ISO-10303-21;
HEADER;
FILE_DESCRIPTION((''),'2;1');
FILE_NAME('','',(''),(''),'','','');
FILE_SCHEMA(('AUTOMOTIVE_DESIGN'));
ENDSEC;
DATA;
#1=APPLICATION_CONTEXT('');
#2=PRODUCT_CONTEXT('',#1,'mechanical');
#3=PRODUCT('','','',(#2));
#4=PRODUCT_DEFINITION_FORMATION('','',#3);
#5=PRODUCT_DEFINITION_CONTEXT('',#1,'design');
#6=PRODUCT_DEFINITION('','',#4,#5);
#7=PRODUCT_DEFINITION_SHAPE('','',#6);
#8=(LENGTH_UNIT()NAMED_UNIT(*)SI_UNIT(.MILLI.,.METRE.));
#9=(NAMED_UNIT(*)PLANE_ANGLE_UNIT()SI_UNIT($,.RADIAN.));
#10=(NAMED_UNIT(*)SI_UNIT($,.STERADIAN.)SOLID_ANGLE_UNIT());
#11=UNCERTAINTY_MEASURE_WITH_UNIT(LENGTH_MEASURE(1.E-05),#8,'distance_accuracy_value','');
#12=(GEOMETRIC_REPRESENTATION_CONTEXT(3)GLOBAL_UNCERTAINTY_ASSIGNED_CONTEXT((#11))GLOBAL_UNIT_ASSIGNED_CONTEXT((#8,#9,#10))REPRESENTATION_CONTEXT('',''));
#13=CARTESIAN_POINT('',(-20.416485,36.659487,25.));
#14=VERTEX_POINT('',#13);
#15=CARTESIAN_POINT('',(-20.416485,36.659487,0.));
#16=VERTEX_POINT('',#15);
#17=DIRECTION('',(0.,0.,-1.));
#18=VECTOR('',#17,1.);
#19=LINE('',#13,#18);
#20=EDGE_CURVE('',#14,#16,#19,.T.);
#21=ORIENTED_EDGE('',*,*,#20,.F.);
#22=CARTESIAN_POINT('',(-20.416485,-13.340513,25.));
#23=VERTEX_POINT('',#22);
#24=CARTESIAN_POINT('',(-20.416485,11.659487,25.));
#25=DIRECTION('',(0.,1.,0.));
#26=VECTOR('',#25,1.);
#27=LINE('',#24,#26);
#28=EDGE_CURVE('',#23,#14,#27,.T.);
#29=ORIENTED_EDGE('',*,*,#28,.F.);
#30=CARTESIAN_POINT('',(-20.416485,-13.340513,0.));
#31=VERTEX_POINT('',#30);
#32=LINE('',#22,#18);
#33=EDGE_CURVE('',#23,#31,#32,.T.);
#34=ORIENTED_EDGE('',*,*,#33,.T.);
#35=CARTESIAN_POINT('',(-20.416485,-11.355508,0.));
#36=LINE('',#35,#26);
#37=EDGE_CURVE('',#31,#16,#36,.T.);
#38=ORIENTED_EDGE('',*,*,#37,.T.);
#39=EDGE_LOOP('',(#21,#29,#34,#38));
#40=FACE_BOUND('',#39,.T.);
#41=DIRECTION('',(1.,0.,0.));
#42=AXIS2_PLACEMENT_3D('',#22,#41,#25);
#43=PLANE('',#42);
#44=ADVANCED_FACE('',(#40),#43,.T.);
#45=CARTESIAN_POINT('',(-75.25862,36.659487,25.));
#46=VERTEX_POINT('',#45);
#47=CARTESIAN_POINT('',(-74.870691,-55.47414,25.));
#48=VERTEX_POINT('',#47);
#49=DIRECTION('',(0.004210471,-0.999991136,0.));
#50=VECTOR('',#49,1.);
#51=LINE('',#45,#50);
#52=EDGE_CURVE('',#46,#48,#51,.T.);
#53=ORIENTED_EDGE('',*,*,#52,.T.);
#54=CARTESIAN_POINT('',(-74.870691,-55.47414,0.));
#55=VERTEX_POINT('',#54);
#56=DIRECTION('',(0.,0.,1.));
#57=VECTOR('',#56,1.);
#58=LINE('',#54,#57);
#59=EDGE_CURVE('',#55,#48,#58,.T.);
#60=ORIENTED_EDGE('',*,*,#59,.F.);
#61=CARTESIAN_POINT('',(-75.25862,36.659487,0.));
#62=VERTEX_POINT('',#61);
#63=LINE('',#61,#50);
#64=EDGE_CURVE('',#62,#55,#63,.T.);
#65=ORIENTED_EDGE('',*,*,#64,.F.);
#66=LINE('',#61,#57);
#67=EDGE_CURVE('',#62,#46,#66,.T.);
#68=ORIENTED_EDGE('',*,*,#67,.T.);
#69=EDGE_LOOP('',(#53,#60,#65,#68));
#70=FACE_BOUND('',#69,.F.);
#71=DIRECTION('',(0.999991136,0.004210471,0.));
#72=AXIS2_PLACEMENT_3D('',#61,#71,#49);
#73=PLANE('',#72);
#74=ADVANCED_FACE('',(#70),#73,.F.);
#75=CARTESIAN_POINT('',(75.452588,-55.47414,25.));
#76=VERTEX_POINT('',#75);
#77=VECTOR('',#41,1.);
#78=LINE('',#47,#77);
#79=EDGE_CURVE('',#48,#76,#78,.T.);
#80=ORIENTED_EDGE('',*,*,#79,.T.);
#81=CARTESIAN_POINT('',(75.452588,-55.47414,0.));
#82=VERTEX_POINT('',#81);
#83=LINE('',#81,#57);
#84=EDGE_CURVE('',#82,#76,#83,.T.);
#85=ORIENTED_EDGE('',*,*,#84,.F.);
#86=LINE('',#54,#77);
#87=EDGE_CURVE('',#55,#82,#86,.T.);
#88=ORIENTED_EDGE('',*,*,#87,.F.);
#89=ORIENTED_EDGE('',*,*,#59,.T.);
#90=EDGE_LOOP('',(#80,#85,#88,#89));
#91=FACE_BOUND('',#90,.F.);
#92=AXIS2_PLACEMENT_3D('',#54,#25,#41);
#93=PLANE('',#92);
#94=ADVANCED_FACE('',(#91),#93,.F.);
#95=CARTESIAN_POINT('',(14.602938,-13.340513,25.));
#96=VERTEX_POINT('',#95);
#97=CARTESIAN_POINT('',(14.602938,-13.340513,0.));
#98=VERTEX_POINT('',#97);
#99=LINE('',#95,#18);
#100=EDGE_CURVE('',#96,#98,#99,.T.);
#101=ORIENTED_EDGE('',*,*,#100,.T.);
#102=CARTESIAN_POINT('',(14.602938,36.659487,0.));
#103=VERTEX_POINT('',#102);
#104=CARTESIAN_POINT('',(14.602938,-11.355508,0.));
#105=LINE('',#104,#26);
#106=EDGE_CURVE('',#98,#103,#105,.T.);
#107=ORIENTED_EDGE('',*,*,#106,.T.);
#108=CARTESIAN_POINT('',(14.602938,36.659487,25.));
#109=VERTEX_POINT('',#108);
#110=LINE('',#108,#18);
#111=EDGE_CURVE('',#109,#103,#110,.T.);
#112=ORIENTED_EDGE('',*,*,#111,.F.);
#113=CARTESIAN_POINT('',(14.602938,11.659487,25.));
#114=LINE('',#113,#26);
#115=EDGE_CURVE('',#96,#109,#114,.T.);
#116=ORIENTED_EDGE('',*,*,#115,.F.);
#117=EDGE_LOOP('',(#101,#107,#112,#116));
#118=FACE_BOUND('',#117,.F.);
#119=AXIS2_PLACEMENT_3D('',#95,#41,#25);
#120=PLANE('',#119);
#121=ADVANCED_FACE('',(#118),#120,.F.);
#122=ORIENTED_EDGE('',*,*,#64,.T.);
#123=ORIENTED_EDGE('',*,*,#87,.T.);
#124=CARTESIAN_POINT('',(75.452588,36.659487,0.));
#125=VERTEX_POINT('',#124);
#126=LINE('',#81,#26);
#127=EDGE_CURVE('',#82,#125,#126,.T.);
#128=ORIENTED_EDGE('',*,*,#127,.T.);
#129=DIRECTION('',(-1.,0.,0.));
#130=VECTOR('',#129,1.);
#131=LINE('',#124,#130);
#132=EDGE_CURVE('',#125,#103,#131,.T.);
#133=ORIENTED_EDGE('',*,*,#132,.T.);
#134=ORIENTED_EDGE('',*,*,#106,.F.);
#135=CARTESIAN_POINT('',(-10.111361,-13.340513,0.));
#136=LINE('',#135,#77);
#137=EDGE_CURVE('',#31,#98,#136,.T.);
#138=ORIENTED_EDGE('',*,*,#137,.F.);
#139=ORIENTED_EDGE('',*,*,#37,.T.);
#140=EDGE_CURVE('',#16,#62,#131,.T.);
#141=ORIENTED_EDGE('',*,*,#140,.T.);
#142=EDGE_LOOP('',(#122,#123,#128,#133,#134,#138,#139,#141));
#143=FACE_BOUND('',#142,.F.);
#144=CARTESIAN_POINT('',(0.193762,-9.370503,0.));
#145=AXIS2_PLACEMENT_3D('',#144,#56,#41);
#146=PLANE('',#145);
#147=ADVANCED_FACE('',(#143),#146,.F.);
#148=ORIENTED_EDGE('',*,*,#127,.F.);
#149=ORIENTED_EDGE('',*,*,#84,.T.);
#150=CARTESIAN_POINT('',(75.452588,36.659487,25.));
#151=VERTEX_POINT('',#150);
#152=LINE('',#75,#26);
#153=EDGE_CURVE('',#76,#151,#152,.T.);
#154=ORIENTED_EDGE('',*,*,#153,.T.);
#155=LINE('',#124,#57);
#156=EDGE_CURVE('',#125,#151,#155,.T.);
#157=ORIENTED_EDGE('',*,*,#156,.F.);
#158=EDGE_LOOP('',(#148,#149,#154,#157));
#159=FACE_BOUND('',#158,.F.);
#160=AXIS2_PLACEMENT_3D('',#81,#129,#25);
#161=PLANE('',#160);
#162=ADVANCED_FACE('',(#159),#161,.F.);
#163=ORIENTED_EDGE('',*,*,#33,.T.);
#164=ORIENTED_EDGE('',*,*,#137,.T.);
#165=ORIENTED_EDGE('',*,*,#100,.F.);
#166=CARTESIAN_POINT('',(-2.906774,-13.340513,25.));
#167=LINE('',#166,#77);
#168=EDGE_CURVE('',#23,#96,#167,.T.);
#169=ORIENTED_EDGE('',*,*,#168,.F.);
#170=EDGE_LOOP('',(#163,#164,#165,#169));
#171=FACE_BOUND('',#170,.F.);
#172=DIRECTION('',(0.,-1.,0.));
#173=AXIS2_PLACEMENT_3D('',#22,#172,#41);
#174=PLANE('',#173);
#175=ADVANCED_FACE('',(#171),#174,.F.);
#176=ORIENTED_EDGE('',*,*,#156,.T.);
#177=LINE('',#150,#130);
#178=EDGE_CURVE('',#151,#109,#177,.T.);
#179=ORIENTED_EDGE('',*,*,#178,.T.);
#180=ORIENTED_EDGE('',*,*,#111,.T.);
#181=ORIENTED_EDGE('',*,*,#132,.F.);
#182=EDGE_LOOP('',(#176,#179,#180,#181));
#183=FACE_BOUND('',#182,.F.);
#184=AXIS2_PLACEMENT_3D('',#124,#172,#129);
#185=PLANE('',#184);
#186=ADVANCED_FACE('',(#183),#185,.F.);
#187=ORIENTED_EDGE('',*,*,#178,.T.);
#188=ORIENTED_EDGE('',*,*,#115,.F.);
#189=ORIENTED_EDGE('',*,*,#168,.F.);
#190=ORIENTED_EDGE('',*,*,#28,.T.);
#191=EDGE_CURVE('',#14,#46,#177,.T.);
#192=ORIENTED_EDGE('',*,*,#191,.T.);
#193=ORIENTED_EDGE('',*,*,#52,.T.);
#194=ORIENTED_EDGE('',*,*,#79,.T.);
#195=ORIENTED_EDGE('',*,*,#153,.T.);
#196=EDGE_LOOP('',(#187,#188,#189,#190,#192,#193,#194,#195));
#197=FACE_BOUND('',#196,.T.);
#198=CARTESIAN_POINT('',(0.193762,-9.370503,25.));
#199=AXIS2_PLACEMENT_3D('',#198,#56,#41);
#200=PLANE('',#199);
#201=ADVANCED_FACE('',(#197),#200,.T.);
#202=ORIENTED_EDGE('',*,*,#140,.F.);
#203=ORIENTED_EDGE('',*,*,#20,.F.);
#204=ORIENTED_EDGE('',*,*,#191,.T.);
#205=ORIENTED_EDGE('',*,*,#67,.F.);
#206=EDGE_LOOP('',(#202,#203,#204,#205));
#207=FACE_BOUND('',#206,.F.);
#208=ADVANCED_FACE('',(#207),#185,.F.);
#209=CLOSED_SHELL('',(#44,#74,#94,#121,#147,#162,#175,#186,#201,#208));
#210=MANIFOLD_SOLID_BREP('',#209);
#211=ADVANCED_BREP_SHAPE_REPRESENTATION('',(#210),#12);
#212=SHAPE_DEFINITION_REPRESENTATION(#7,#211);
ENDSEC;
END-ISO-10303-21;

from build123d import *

# Parameters (mm, degrees)
F1_DEPTH = 25
F2_W     = 35.0194228813
F2_H     = 50
F3_DEPTH = 40.3


# Not quite as in the source:
# - the program builds the solid bodies; features that only make, move or delete a surface that nothing else refers to are left out


with BuildPart() as f1:
    # F0 (on Top) → F1 (new body)
    with BuildSketch(Plane.XY):
        Polygon((75.4525884986, 36.6594865918), (-75.2586200833, 36.6594865918), (-74.8706907034, -55.47413975), (75.4525884986, -55.47413975), align=None)
    extrude(amount=F1_DEPTH)

    # F2 (on face) → F3 (cut)
    with BuildSketch(Plane.XY.offset(25)):
        with Locations((-2.906773705, 11.6594865918)):
            Rectangle(F2_W, F2_H)
    extrude(amount=-F3_DEPTH, mode=Mode.SUBTRACT)


solid = f1.part
